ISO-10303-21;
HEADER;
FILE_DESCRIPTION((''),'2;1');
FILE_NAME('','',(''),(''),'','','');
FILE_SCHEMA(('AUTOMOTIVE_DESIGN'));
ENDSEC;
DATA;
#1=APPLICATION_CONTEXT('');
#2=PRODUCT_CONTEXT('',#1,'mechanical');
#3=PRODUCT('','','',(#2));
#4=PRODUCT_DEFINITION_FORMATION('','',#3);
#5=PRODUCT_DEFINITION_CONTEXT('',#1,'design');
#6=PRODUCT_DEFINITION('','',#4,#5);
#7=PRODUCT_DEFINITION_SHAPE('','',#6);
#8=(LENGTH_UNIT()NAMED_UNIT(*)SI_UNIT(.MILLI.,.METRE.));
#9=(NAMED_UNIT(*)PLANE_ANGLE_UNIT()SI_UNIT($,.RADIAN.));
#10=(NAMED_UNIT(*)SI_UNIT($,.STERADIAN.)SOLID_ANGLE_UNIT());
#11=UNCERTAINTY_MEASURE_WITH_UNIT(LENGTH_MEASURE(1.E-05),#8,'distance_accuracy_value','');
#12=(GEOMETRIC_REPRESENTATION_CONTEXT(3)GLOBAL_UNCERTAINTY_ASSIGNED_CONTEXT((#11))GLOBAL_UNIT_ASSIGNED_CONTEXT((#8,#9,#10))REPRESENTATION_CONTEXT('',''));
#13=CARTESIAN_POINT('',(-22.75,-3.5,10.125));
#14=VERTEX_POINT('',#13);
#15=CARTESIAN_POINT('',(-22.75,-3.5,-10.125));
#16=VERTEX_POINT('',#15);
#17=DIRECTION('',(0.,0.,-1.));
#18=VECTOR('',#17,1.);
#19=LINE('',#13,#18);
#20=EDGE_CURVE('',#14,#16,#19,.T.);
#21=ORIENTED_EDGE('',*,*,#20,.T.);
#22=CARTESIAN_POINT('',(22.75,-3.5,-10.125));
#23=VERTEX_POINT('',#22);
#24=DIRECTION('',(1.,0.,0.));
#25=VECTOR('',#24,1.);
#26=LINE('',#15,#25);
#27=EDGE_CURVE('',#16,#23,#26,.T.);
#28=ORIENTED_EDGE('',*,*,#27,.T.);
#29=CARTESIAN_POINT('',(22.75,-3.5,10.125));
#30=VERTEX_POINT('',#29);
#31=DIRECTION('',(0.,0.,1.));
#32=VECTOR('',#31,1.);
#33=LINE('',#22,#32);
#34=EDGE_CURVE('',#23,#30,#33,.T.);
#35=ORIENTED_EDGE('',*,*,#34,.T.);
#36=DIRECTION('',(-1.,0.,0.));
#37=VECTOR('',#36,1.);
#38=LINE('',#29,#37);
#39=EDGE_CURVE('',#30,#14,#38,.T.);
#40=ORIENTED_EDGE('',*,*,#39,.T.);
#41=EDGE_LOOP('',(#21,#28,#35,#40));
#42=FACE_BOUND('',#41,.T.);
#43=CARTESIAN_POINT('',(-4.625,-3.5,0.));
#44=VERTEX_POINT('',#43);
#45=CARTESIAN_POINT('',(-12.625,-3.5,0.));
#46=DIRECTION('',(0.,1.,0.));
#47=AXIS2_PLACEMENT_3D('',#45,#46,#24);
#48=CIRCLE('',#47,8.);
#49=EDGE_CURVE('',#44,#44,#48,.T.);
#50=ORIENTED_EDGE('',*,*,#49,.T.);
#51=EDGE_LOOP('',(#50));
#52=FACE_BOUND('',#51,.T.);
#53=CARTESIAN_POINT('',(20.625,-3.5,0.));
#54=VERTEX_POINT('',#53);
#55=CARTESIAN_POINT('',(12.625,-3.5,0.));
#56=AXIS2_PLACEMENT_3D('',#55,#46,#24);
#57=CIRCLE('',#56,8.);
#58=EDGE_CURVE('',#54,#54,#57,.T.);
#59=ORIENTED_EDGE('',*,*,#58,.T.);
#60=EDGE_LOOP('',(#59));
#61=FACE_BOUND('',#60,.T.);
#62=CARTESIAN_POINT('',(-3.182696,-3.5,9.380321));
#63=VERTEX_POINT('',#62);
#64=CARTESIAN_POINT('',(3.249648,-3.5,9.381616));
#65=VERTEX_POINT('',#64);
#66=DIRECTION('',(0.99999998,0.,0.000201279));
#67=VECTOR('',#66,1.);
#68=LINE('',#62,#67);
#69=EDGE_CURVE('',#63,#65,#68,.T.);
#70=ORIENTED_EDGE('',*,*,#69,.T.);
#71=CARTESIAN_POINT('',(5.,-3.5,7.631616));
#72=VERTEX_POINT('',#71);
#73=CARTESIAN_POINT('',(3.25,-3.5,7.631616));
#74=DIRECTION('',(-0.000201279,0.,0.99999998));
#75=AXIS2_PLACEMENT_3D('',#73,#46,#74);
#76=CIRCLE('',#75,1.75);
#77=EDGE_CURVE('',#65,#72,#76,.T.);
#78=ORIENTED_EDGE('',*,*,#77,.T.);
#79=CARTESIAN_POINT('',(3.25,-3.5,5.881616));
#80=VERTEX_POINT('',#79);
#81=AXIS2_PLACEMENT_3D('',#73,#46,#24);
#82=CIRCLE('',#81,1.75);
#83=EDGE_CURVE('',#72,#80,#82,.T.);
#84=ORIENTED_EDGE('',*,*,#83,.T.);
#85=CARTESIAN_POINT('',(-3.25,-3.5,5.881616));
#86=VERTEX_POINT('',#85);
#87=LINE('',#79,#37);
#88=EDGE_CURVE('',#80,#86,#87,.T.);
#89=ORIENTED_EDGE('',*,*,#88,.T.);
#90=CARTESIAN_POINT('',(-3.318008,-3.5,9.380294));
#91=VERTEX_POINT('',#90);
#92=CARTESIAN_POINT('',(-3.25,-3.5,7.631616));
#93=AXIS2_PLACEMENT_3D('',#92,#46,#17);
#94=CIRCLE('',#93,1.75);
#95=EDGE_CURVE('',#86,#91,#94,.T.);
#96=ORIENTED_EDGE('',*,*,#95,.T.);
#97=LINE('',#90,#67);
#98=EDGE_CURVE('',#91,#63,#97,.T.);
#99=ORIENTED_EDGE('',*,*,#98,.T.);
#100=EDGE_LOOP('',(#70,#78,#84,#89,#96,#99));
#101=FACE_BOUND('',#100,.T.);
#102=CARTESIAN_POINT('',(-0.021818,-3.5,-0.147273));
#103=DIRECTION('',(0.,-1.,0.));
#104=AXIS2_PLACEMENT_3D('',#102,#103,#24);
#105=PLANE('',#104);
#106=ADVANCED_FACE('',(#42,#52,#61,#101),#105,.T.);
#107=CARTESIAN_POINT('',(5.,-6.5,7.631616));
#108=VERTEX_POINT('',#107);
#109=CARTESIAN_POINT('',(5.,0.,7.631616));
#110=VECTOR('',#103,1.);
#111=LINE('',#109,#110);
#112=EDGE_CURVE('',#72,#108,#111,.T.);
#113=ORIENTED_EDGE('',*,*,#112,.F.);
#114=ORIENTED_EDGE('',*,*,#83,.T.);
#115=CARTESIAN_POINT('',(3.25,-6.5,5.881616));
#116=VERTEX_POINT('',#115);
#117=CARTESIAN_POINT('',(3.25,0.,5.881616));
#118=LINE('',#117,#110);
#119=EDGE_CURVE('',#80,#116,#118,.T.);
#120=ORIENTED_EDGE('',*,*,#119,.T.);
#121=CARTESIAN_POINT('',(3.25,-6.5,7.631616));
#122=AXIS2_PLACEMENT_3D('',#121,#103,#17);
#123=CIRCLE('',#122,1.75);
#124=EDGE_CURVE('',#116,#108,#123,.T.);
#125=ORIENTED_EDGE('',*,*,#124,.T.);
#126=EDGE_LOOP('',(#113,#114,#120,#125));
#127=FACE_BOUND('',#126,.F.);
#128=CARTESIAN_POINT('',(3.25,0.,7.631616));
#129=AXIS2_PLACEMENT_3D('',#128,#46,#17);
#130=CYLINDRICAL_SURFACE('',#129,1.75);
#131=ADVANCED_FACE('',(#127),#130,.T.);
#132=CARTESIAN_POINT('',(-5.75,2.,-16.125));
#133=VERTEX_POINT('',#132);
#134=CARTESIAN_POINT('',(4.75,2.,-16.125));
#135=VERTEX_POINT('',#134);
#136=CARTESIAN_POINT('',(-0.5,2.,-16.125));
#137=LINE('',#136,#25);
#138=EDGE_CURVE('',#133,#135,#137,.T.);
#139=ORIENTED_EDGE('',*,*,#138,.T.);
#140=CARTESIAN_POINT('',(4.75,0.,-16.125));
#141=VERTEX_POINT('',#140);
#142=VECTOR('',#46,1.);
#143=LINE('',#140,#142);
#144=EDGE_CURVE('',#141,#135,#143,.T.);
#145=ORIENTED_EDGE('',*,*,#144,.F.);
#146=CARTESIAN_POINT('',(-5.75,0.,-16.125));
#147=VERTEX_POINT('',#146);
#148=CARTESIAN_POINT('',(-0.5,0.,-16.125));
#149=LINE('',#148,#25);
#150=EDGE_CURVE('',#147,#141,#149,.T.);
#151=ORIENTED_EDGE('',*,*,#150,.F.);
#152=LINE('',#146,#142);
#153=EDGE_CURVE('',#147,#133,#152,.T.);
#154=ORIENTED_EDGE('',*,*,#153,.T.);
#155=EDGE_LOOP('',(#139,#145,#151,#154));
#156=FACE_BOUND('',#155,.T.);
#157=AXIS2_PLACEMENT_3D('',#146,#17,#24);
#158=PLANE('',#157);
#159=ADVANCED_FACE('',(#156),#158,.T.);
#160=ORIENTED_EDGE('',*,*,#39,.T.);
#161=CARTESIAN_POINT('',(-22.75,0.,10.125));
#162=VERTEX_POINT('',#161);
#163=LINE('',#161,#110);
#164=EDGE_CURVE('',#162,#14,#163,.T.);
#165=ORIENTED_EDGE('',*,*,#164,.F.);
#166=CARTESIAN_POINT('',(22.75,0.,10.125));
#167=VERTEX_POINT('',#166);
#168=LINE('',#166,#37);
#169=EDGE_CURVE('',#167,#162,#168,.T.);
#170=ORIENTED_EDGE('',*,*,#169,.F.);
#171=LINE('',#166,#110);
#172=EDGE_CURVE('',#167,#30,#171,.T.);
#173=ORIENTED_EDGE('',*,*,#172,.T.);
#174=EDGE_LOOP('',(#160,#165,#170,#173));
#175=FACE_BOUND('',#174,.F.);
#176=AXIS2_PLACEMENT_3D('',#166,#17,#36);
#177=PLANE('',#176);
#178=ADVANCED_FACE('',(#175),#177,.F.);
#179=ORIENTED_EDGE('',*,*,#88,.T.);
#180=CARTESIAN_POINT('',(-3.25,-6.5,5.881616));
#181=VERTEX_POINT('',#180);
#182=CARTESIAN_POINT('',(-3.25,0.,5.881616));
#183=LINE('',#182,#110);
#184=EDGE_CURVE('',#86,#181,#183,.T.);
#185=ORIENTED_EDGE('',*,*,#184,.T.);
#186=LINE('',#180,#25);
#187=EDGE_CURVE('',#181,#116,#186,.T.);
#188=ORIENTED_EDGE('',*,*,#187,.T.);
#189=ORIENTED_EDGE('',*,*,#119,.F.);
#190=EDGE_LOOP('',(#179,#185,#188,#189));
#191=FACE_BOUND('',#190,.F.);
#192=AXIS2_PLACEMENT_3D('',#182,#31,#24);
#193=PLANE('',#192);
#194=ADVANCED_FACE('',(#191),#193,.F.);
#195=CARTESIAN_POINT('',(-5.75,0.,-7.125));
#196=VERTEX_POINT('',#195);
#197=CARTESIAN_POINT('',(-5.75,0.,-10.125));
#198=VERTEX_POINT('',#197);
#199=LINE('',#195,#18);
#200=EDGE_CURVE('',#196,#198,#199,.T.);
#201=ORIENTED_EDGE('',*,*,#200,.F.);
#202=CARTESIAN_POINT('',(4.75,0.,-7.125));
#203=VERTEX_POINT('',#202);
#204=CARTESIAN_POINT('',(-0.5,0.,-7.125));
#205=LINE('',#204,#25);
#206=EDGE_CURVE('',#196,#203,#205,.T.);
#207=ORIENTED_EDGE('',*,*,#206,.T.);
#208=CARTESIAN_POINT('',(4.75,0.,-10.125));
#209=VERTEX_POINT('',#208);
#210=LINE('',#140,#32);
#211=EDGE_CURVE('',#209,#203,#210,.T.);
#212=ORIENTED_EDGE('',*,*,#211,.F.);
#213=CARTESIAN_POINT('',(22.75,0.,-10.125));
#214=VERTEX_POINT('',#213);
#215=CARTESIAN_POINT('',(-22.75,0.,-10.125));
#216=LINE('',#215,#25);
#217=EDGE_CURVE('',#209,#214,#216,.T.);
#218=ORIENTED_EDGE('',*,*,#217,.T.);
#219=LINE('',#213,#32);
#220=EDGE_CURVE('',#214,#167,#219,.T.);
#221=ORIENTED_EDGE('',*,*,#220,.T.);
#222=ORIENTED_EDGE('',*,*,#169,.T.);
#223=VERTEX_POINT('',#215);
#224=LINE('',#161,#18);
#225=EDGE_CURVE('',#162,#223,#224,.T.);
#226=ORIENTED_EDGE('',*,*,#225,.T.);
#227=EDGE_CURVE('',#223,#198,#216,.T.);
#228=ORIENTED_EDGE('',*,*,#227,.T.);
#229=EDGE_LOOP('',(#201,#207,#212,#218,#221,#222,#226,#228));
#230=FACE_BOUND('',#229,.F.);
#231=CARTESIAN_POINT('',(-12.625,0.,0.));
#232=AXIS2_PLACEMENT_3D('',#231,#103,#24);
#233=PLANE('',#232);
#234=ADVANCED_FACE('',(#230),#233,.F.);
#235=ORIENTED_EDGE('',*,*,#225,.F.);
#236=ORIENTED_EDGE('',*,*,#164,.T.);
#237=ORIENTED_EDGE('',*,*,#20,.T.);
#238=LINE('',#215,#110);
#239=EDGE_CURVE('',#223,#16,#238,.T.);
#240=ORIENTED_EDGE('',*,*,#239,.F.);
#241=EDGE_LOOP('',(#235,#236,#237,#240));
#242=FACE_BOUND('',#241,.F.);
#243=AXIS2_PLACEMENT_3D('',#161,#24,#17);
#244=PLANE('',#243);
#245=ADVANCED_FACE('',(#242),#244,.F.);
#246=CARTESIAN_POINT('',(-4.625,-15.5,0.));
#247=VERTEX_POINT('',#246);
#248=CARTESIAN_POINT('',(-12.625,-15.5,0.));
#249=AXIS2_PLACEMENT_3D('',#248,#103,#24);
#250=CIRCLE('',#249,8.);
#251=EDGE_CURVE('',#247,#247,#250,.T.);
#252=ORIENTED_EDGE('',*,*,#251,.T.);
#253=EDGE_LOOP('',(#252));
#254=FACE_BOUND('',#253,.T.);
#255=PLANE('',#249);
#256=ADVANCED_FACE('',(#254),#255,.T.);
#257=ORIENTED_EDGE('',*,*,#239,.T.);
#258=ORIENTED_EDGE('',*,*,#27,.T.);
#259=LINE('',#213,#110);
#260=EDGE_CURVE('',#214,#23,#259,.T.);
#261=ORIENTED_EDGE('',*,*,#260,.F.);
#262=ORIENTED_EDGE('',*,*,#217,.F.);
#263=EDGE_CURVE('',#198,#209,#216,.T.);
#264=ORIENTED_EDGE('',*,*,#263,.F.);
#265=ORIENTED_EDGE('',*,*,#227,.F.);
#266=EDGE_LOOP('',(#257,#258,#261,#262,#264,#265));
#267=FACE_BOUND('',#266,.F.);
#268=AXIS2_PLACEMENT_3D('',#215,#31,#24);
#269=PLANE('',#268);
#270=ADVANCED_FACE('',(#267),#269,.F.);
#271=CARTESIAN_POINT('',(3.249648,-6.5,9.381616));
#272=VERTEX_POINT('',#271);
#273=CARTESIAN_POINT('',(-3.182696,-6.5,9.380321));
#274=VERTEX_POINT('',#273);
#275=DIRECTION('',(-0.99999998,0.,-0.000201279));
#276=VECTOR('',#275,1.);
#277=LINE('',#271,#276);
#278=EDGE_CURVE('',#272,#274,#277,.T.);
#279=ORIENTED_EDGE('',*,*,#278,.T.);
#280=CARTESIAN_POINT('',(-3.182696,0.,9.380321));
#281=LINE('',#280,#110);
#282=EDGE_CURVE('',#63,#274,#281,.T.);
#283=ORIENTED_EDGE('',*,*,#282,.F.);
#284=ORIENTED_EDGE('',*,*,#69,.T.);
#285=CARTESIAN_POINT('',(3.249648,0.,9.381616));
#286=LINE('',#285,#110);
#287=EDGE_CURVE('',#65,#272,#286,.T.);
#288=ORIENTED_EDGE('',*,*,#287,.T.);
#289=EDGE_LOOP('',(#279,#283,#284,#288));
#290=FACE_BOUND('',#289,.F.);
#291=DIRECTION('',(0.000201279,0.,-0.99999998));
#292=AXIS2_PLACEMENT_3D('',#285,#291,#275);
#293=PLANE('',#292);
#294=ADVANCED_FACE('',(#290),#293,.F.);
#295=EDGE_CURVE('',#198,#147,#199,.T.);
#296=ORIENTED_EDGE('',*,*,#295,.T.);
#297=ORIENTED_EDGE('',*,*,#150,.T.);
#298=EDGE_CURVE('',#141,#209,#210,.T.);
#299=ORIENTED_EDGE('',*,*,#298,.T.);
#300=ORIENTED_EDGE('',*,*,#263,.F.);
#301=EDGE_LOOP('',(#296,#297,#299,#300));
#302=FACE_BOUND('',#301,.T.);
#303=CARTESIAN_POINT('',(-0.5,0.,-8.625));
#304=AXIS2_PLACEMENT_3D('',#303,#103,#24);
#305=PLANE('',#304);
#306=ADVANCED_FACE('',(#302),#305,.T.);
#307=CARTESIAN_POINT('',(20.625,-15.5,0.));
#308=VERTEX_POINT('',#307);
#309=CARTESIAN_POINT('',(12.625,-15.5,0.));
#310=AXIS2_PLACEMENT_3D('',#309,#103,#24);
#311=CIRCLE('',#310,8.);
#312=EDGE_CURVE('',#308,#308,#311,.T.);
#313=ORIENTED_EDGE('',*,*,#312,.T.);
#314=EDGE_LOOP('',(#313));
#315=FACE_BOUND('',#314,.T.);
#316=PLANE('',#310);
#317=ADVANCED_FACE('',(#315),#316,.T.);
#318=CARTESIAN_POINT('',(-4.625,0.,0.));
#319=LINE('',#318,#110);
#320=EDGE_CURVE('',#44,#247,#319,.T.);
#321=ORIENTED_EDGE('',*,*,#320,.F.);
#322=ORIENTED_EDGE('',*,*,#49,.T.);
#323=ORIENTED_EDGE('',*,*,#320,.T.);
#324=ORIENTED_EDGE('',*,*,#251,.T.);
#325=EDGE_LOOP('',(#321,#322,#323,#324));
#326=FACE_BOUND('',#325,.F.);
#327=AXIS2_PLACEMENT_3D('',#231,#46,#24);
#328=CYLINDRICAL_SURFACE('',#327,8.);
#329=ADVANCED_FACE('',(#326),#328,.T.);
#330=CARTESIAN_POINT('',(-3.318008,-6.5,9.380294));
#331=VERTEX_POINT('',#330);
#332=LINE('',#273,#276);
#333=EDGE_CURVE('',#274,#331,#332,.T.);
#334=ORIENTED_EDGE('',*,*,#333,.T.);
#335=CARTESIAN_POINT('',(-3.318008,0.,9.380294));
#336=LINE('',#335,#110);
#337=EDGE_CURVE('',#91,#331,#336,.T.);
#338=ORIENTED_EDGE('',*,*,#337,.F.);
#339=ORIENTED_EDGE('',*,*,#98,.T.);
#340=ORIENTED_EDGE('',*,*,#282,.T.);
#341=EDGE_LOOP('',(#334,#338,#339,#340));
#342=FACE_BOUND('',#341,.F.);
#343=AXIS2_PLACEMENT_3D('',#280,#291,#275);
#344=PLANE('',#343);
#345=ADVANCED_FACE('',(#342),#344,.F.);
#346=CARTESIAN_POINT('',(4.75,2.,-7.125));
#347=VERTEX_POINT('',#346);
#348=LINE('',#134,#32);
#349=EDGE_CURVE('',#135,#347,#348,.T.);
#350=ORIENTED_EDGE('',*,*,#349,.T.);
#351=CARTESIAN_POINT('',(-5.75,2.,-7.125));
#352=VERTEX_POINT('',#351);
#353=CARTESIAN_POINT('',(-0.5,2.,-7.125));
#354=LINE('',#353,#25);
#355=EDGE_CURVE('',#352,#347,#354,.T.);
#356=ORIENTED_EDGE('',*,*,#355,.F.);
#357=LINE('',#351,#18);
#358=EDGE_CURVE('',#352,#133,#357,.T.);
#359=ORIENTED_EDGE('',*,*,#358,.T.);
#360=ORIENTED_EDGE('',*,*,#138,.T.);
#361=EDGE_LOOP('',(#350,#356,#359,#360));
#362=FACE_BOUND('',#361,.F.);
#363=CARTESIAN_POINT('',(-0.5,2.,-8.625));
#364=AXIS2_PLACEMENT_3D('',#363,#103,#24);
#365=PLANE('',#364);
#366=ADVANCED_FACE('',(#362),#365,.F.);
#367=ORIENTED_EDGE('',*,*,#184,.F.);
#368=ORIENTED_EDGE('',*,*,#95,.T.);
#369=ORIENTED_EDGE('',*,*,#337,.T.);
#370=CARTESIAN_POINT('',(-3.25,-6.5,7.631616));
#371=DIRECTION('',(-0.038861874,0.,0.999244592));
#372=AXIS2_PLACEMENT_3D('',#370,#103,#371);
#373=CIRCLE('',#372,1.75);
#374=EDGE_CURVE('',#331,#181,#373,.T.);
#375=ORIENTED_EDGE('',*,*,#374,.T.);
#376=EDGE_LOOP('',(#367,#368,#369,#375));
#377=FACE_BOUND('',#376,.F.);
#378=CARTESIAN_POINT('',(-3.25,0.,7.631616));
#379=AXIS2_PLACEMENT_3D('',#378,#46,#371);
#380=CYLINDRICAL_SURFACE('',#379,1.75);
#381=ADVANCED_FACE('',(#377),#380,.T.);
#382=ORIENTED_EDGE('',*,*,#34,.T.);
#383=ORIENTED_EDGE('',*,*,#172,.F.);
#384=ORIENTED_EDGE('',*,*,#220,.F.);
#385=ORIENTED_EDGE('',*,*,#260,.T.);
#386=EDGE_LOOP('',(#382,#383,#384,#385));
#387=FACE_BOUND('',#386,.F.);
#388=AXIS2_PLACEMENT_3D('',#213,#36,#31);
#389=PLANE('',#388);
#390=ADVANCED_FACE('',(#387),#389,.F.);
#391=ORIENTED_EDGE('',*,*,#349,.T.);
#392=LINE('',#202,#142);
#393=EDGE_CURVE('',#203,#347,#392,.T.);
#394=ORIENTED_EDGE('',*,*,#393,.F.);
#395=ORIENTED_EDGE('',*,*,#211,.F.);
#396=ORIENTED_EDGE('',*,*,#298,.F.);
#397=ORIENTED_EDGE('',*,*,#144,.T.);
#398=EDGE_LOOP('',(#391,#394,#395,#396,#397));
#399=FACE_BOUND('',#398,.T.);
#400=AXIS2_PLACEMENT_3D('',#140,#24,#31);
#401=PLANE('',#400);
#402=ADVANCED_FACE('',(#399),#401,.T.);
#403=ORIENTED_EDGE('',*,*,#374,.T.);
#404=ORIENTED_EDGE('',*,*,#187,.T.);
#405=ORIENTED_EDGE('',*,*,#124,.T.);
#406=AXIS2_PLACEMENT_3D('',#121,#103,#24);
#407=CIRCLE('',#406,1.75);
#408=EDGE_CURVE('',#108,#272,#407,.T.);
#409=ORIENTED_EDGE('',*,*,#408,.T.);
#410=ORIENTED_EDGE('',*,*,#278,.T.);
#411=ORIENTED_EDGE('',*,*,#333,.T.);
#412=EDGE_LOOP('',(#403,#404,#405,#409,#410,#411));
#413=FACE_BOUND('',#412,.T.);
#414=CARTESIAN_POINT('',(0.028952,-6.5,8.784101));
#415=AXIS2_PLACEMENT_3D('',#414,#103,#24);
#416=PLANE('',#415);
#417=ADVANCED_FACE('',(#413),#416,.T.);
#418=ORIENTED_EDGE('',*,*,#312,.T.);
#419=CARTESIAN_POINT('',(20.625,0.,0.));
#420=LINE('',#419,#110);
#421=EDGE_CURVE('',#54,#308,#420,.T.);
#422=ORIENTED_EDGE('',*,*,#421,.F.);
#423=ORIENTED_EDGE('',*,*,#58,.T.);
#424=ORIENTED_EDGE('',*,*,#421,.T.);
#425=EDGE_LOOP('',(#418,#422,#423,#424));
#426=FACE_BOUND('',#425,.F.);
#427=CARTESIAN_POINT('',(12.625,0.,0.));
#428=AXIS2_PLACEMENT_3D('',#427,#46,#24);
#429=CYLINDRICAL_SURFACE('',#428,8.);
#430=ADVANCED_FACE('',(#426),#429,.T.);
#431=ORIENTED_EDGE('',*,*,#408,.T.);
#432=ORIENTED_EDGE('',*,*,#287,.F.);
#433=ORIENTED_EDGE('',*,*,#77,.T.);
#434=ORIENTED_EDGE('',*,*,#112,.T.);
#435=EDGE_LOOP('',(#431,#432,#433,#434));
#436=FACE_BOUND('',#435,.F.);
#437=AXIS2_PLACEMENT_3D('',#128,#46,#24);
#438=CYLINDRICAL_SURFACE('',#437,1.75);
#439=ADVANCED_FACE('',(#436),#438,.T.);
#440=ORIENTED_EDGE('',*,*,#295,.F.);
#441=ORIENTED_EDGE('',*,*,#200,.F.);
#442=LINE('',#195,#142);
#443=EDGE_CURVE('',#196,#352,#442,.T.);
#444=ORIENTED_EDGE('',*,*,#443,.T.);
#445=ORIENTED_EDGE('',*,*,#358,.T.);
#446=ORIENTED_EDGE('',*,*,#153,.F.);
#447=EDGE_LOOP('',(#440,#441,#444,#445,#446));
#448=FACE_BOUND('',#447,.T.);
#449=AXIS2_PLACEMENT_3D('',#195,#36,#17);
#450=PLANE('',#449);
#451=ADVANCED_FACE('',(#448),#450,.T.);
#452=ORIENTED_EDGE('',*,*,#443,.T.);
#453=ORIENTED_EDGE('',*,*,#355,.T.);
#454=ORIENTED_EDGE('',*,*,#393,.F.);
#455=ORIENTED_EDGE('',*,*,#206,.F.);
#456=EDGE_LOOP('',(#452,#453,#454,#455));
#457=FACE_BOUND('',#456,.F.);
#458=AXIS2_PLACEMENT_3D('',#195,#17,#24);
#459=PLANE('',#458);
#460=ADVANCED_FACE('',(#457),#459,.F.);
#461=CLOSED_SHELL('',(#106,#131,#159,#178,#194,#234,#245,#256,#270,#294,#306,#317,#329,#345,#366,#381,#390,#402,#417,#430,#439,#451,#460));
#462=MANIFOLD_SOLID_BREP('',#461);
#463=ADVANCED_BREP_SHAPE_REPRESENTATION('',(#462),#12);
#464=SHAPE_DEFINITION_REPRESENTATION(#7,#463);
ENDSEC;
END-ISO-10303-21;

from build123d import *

# Parameters (mm, degrees)
F0_R     = 8
F0_W     = 10.5
F0_H     = 3
F1_DEPTH = 3.5
F2_DEPTH = 15.5
F3_DEPTH = 6.5
F0_H_2   = 6
F4_DEPTH = 2


with BuildPart() as f1:
    # F0 (on Front) → F1 (new body)
    with BuildSketch(Plane.XZ):
        Polygon((22.75, 10.125), (-22.75, 10.125), (-22.75, -10.125), (-5.75, -10.125), (-5.75, -7.125), (4.75, -7.125), (4.75, -10.125), (22.75, -10.125), align=None)
        with Locations((-12.625, 0)):
            Circle(F0_R, mode=Mode.SUBTRACT)
        with Locations((12.625, 0)):
            Circle(F0_R, mode=Mode.SUBTRACT)
        with BuildLine():
            ThreePointArc((-3.25, 5.8816159739), (-4.9996694778, 7.5976054108), (-3.3180082792, 9.38029401))
            ThreePointArc((-3.3180082792, 9.38029401), (-3.2503522375, 9.3816159385), (-3.1826956692, 9.3803212456))
            Line((-3.1826956692, 9.3803212456), (3.2496477625, 9.3816159385))
            ThreePointArc((3.2496477625, 9.3816159385), (4.487312326, 8.8691773695), (5, 7.6316159739))
            ThreePointArc((5, 7.6316159739), (4.4874368671, 6.3941791069), (3.25, 5.8816159739))
            Line((3.25, 5.8816159739), (-3.25, 5.8816159739))
        make_face(mode=Mode.SUBTRACT)
        with Locations((-0.5, -8.625)):
            Rectangle(F0_W, F0_H)
        with Locations((-12.625, 0)):
            Circle(F0_R)
        with Locations((12.625, 0)):
            Circle(F0_R)
        with BuildLine():
            ThreePointArc((-3.1826956692, 9.3803212456), (-3.2503522375, 9.3816159385), (-3.3180082792, 9.38029401))
            Line((-3.3180082792, 9.38029401), (-3.1826956692, 9.3803212456))
        make_face()
    extrude(amount=F1_DEPTH)

    # F0 (on Front) → F2 (join)
    with BuildSketch(Plane.XZ):
        with Locations((-12.625, 0)):
            Circle(F0_R)
        with Locations((12.625, 0)):
            Circle(F0_R)
    extrude(amount=F2_DEPTH)

    # F0 (on Front) → F3 (join)
    with BuildSketch(Plane.XZ):
        with BuildLine():
            Line((3.2496477625, 9.3816159385), (-3.1826956692, 9.3803212456))
            ThreePointArc((-3.1826956692, 9.3803212456), (-1.988991955, 8.8450238652), (-1.5, 7.6316159739))
            Line((-1.5, 7.6316159739), (1.5, 7.6316159739))
            ThreePointArc((1.5, 7.6316159739), (2.0124386044, 8.8689283), (3.2496477625, 9.3816159385))
        make_face()
        with BuildLine():
            ThreePointArc((-1.5, 7.6316159739), (-2.0125631329, 6.3941791069), (-3.25, 5.8816159739))
            Line((-3.25, 5.8816159739), (3.25, 5.8816159739))
            ThreePointArc((3.25, 5.8816159739), (2.0125631329, 6.3941791069), (1.5, 7.6316159739))
            Line((1.5, 7.6316159739), (-1.5, 7.6316159739))
        make_face()
        with BuildLine():
            Line((-3.1826956692, 9.3803212456), (-3.3180082792, 9.38029401))
            ThreePointArc((-3.3180082792, 9.38029401), (-4.9996694778, 7.5976054108), (-3.25, 5.8816159739))
            ThreePointArc((-3.25, 5.8816159739), (-2.0125631329, 6.3941791069), (-1.5, 7.6316159739))
            ThreePointArc((-1.5, 7.6316159739), (-1.988991955, 8.8450238652), (-3.1826956692, 9.3803212456))
        make_face()
        with BuildLine():
            ThreePointArc((1.5, 7.6316159739), (2.0125631329, 6.3941791069), (3.25, 5.8816159739))
            ThreePointArc((3.25, 5.8816159739), (4.4874368671, 6.3941791069), (5, 7.6316159739))
            ThreePointArc((5, 7.6316159739), (4.487312326, 8.8691773695), (3.2496477625, 9.3816159385))
            ThreePointArc((3.2496477625, 9.3816159385), (2.0124386044, 8.8689283), (1.5, 7.6316159739))
        make_face()
    extrude(amount=F3_DEPTH)

    # F0 (on Front) → F4 (join)
    with BuildSketch(Plane.XZ):
        with Locations((-0.5, -8.625)):
            Rectangle(F0_W, F0_H)
        with Locations((-0.5, -13.125)):
            Rectangle(F0_W, F0_H_2)
    extrude(amount=-F4_DEPTH)


solid = f1.part
